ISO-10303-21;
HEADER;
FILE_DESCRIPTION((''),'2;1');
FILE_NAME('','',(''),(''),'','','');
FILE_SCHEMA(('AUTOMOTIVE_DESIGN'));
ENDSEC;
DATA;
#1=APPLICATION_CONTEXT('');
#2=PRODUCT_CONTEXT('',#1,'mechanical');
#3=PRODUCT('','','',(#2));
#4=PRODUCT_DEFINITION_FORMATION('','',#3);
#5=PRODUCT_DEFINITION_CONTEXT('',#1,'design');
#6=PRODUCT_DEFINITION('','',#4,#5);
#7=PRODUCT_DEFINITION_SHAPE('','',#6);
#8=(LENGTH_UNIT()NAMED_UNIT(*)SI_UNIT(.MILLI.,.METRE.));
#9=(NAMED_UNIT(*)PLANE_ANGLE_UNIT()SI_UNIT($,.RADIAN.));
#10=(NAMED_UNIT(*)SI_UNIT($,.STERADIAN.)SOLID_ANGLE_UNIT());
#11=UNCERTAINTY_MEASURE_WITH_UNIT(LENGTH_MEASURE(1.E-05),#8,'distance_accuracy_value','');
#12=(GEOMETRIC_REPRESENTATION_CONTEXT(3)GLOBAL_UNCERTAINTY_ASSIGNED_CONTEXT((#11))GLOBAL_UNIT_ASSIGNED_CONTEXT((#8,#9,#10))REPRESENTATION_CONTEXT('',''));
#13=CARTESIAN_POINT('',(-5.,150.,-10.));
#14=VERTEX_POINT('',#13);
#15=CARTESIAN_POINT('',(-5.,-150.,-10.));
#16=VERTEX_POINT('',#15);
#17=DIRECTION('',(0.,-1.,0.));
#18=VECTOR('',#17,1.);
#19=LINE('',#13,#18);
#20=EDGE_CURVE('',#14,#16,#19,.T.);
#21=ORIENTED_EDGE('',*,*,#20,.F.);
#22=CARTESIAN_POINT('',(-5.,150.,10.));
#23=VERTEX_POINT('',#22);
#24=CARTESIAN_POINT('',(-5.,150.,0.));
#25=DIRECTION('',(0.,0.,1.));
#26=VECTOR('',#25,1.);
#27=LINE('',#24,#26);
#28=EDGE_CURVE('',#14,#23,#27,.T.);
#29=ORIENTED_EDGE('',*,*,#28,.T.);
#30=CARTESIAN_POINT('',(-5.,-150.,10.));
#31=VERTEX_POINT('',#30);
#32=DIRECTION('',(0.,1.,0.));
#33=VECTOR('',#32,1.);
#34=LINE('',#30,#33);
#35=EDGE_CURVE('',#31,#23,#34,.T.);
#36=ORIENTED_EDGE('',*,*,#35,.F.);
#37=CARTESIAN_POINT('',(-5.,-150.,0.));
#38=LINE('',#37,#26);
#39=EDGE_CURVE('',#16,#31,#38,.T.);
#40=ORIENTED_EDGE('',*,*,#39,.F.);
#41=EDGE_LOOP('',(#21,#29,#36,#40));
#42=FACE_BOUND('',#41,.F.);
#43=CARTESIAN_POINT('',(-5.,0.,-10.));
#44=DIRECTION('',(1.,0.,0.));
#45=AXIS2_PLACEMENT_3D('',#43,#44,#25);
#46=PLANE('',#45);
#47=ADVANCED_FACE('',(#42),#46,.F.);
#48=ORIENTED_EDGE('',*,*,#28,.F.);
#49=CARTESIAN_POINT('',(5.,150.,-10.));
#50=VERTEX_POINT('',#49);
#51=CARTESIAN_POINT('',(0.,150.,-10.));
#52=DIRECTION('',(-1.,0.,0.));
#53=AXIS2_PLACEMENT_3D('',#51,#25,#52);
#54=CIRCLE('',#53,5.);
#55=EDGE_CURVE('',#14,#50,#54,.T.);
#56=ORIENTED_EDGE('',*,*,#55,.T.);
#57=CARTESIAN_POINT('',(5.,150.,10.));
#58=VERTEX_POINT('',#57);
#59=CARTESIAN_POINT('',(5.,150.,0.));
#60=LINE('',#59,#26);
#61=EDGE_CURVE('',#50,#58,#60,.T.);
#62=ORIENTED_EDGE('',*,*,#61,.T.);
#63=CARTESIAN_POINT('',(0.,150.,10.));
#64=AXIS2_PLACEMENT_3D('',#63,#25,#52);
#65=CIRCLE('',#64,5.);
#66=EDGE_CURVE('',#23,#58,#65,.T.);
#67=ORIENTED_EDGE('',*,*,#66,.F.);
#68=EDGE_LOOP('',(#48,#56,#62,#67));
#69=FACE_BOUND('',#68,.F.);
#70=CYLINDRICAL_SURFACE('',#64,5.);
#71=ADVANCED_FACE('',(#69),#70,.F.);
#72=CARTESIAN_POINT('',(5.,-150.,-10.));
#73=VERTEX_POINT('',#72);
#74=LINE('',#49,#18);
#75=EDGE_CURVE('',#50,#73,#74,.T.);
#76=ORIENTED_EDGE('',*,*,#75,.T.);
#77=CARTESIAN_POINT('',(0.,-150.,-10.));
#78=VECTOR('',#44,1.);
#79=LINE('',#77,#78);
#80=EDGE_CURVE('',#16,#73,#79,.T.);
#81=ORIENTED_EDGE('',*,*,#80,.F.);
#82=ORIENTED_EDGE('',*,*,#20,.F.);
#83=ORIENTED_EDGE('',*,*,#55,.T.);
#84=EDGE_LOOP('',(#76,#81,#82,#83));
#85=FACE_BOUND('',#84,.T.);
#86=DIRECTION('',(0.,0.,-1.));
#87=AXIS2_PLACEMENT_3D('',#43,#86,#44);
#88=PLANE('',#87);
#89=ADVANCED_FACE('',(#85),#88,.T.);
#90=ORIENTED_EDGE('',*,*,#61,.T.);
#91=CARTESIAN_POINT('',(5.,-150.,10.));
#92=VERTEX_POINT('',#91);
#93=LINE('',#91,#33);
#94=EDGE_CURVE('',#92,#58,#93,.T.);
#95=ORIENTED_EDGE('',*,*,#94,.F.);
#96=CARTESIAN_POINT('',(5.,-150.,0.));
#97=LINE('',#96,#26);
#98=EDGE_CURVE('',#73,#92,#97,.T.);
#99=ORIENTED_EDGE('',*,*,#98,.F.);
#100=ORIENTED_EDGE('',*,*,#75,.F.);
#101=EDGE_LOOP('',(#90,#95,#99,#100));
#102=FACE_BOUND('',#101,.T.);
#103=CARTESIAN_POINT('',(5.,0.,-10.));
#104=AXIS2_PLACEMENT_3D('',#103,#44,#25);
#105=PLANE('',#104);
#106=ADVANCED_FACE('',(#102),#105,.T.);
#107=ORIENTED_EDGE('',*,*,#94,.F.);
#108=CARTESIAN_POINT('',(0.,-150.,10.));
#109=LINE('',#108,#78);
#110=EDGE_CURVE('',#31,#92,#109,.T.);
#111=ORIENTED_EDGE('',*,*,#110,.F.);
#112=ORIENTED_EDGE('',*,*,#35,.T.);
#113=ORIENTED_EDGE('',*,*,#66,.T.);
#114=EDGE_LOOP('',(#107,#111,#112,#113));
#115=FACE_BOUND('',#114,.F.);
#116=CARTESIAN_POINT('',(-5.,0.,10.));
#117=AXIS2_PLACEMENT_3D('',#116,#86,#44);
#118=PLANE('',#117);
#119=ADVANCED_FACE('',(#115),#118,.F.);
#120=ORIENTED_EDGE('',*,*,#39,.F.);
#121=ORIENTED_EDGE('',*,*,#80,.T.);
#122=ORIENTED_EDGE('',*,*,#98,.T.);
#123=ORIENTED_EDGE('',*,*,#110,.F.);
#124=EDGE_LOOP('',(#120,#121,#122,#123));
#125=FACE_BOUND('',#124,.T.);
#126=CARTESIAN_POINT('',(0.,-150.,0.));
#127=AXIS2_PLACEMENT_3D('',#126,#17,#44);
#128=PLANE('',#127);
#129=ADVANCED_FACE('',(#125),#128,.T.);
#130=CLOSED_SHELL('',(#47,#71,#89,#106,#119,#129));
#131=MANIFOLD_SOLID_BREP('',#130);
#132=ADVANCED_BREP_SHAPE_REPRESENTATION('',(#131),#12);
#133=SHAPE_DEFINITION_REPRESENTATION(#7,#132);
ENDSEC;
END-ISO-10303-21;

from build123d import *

# Parameters (mm, degrees)
F0_W     = 10
F0_H     = 20
F1_DEPTH = 150
F3_DEPTH = 311


# Not quite as in the source:
# - an extrude ends at something that could not be found from the text; its depth is read off the source's solid


with BuildPart() as f1:
    # F0 (on Front) → F1 (new body, symmetric)
    with BuildSketch(Plane.XZ):
        Rectangle(F0_W, F0_H)
    extrude(amount=F1_DEPTH, both=True)

    # F2 (on face) → F3 (cut, through all)
    with BuildSketch(Plane.XY.offset(10)):
        with BuildLine():
            Line((-5, 150), (5, 150))
            ThreePointArc((5, 150), (0, 155), (-5, 150))
        make_face()
        with BuildLine():
            ThreePointArc((-5, 150), (0, 145), (5, 150))
            Line((5, 150), (-5, 150))
        make_face()
    extrude(amount=-F3_DEPTH, mode=Mode.SUBTRACT)


solid = f1.part
